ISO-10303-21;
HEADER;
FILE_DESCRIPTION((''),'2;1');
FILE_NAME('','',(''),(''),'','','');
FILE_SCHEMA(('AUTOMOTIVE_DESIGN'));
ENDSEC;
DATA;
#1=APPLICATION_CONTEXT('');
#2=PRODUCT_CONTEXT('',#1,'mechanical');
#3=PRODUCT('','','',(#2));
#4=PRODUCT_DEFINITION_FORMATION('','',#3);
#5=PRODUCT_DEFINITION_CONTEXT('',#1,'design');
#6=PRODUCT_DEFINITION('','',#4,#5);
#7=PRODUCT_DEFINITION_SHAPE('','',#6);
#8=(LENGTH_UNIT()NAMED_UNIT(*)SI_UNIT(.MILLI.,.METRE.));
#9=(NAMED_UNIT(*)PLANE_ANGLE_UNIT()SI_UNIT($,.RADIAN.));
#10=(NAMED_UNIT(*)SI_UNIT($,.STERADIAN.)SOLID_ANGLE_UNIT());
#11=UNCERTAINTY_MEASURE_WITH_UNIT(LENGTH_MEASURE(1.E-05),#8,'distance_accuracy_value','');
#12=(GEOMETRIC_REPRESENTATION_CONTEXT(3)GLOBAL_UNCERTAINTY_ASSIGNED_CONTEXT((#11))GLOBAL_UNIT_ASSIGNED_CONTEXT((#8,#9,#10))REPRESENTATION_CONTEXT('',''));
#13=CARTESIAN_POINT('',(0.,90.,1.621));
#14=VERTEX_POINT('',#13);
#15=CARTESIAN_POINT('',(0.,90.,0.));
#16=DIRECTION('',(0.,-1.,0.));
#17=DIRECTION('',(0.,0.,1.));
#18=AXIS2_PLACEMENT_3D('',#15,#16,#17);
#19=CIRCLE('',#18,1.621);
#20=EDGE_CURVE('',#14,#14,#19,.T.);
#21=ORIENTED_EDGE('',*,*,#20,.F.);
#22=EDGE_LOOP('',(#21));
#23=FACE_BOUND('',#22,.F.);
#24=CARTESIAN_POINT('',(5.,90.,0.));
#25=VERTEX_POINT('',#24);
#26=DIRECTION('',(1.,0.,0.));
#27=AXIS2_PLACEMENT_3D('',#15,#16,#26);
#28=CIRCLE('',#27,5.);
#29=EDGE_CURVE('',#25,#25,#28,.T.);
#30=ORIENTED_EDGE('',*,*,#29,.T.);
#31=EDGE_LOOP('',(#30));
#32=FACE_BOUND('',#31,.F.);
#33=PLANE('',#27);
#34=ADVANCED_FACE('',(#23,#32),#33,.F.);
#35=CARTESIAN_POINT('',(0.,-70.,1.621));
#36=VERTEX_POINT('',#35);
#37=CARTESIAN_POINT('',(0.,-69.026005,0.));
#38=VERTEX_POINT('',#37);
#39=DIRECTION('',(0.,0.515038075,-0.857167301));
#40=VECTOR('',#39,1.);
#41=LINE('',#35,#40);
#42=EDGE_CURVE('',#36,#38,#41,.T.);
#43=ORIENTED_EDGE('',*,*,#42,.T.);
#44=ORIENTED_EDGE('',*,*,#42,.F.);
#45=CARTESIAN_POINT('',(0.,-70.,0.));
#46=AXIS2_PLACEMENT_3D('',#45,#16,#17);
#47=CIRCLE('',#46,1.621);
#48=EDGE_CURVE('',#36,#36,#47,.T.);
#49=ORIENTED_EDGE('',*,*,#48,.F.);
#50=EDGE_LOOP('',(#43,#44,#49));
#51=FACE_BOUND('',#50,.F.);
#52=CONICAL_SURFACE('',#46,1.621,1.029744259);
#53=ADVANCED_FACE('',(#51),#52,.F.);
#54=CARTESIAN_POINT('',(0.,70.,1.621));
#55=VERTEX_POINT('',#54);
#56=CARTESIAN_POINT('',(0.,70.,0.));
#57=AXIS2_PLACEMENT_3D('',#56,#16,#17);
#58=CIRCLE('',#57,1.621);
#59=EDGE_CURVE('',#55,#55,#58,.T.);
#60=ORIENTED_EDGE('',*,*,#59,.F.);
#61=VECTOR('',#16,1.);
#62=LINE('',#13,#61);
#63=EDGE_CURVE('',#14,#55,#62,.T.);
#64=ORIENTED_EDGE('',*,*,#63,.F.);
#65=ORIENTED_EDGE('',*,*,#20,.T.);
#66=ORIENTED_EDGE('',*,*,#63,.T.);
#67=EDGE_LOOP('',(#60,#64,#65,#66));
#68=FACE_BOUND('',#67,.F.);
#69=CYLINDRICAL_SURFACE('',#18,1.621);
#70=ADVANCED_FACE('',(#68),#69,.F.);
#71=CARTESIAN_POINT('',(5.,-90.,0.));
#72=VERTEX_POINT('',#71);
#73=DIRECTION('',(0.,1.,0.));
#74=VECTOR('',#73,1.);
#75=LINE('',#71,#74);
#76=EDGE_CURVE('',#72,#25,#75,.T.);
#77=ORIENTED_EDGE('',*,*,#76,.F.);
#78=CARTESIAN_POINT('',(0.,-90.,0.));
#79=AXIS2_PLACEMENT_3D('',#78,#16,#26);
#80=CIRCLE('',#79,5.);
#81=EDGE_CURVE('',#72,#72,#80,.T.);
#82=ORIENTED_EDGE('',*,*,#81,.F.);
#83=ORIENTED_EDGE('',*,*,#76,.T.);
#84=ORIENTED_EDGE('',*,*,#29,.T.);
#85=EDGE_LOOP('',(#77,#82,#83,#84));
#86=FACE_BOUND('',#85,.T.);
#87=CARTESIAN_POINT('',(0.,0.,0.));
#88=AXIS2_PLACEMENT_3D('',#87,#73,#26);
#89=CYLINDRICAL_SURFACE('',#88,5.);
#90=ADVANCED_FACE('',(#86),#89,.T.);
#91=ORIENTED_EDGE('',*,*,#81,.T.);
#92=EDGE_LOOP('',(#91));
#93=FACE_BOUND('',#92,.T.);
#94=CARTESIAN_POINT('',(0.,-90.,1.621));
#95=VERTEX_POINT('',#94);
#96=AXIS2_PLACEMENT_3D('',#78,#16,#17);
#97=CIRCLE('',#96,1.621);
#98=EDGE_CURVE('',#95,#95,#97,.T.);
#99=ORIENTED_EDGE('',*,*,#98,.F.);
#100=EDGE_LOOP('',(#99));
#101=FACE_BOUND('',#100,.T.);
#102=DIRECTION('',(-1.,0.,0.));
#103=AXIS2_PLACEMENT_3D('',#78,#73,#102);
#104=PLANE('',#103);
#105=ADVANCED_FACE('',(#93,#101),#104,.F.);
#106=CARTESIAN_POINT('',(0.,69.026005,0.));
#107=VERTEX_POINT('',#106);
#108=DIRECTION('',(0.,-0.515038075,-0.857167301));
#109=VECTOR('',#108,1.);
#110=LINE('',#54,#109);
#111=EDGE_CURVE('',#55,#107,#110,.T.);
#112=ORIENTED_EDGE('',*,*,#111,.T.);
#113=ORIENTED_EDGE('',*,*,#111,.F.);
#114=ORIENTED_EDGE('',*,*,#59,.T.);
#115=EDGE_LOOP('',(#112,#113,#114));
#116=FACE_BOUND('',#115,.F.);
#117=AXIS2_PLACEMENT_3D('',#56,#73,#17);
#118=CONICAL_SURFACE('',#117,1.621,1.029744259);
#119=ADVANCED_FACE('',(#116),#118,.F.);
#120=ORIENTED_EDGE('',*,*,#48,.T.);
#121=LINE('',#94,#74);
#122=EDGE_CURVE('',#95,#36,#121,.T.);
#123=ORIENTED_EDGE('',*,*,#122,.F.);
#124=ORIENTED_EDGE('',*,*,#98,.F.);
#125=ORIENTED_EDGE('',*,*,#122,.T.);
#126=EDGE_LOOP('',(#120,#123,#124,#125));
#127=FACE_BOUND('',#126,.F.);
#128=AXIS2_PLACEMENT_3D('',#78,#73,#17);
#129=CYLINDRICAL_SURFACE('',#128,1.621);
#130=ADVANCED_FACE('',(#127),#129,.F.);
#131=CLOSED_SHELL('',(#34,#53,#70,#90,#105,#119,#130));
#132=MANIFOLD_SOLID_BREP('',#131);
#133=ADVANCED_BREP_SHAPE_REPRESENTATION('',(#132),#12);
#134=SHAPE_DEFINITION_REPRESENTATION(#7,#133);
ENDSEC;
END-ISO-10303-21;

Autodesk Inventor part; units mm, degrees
ref_plane "YZ Plane" through (0, 0, 0) normal (1, 0, 0) x (0, 1, 0)
ref_plane "XZ Plane" through (0, 0, 0) normal (0, 1, 0) x (-1, 0, 0)
ref_plane "XY Plane" through (0, 0, 0) normal (0, 0, 1) x (1, 0, 0)
sketch "Esquisse1" plane through (0, 0, 0) normal (0, 0, 1) x (1, 0, 0)
  line L0 (0, 0) -> (5, 0)
  line L1 (5, 0) -> (5, 90)
  line L2 (5, 90) -> (0, 90)
  line L3 (0, 90) -> (0, 0)
  dimension "d0" = 10
  dimension "d3" = 180
revolve "Révolution1" add sketch "Esquisse1" angle 360 about axis through (0, 90, 0) along (0, -1, 0)
sketch "Esquisse2" plane through (0, 90, 0) normal (0, 1, 0) x (1, 0, 0)
  circle A0 centre (0, 0) radius 5 projected
hole "Perçage1" at (0, 90, 0) direction (0, -1, 0) diameter 3.242 depth 20 tip angle 118 thread size "M4x0.7" class "6H" standard "ISO Metric profile"
mirror "Mise en miroir1" about plane through (0, 0, 0) normal (0, 1, 0)
properties part number "barre" material "Aluminium 6061"
